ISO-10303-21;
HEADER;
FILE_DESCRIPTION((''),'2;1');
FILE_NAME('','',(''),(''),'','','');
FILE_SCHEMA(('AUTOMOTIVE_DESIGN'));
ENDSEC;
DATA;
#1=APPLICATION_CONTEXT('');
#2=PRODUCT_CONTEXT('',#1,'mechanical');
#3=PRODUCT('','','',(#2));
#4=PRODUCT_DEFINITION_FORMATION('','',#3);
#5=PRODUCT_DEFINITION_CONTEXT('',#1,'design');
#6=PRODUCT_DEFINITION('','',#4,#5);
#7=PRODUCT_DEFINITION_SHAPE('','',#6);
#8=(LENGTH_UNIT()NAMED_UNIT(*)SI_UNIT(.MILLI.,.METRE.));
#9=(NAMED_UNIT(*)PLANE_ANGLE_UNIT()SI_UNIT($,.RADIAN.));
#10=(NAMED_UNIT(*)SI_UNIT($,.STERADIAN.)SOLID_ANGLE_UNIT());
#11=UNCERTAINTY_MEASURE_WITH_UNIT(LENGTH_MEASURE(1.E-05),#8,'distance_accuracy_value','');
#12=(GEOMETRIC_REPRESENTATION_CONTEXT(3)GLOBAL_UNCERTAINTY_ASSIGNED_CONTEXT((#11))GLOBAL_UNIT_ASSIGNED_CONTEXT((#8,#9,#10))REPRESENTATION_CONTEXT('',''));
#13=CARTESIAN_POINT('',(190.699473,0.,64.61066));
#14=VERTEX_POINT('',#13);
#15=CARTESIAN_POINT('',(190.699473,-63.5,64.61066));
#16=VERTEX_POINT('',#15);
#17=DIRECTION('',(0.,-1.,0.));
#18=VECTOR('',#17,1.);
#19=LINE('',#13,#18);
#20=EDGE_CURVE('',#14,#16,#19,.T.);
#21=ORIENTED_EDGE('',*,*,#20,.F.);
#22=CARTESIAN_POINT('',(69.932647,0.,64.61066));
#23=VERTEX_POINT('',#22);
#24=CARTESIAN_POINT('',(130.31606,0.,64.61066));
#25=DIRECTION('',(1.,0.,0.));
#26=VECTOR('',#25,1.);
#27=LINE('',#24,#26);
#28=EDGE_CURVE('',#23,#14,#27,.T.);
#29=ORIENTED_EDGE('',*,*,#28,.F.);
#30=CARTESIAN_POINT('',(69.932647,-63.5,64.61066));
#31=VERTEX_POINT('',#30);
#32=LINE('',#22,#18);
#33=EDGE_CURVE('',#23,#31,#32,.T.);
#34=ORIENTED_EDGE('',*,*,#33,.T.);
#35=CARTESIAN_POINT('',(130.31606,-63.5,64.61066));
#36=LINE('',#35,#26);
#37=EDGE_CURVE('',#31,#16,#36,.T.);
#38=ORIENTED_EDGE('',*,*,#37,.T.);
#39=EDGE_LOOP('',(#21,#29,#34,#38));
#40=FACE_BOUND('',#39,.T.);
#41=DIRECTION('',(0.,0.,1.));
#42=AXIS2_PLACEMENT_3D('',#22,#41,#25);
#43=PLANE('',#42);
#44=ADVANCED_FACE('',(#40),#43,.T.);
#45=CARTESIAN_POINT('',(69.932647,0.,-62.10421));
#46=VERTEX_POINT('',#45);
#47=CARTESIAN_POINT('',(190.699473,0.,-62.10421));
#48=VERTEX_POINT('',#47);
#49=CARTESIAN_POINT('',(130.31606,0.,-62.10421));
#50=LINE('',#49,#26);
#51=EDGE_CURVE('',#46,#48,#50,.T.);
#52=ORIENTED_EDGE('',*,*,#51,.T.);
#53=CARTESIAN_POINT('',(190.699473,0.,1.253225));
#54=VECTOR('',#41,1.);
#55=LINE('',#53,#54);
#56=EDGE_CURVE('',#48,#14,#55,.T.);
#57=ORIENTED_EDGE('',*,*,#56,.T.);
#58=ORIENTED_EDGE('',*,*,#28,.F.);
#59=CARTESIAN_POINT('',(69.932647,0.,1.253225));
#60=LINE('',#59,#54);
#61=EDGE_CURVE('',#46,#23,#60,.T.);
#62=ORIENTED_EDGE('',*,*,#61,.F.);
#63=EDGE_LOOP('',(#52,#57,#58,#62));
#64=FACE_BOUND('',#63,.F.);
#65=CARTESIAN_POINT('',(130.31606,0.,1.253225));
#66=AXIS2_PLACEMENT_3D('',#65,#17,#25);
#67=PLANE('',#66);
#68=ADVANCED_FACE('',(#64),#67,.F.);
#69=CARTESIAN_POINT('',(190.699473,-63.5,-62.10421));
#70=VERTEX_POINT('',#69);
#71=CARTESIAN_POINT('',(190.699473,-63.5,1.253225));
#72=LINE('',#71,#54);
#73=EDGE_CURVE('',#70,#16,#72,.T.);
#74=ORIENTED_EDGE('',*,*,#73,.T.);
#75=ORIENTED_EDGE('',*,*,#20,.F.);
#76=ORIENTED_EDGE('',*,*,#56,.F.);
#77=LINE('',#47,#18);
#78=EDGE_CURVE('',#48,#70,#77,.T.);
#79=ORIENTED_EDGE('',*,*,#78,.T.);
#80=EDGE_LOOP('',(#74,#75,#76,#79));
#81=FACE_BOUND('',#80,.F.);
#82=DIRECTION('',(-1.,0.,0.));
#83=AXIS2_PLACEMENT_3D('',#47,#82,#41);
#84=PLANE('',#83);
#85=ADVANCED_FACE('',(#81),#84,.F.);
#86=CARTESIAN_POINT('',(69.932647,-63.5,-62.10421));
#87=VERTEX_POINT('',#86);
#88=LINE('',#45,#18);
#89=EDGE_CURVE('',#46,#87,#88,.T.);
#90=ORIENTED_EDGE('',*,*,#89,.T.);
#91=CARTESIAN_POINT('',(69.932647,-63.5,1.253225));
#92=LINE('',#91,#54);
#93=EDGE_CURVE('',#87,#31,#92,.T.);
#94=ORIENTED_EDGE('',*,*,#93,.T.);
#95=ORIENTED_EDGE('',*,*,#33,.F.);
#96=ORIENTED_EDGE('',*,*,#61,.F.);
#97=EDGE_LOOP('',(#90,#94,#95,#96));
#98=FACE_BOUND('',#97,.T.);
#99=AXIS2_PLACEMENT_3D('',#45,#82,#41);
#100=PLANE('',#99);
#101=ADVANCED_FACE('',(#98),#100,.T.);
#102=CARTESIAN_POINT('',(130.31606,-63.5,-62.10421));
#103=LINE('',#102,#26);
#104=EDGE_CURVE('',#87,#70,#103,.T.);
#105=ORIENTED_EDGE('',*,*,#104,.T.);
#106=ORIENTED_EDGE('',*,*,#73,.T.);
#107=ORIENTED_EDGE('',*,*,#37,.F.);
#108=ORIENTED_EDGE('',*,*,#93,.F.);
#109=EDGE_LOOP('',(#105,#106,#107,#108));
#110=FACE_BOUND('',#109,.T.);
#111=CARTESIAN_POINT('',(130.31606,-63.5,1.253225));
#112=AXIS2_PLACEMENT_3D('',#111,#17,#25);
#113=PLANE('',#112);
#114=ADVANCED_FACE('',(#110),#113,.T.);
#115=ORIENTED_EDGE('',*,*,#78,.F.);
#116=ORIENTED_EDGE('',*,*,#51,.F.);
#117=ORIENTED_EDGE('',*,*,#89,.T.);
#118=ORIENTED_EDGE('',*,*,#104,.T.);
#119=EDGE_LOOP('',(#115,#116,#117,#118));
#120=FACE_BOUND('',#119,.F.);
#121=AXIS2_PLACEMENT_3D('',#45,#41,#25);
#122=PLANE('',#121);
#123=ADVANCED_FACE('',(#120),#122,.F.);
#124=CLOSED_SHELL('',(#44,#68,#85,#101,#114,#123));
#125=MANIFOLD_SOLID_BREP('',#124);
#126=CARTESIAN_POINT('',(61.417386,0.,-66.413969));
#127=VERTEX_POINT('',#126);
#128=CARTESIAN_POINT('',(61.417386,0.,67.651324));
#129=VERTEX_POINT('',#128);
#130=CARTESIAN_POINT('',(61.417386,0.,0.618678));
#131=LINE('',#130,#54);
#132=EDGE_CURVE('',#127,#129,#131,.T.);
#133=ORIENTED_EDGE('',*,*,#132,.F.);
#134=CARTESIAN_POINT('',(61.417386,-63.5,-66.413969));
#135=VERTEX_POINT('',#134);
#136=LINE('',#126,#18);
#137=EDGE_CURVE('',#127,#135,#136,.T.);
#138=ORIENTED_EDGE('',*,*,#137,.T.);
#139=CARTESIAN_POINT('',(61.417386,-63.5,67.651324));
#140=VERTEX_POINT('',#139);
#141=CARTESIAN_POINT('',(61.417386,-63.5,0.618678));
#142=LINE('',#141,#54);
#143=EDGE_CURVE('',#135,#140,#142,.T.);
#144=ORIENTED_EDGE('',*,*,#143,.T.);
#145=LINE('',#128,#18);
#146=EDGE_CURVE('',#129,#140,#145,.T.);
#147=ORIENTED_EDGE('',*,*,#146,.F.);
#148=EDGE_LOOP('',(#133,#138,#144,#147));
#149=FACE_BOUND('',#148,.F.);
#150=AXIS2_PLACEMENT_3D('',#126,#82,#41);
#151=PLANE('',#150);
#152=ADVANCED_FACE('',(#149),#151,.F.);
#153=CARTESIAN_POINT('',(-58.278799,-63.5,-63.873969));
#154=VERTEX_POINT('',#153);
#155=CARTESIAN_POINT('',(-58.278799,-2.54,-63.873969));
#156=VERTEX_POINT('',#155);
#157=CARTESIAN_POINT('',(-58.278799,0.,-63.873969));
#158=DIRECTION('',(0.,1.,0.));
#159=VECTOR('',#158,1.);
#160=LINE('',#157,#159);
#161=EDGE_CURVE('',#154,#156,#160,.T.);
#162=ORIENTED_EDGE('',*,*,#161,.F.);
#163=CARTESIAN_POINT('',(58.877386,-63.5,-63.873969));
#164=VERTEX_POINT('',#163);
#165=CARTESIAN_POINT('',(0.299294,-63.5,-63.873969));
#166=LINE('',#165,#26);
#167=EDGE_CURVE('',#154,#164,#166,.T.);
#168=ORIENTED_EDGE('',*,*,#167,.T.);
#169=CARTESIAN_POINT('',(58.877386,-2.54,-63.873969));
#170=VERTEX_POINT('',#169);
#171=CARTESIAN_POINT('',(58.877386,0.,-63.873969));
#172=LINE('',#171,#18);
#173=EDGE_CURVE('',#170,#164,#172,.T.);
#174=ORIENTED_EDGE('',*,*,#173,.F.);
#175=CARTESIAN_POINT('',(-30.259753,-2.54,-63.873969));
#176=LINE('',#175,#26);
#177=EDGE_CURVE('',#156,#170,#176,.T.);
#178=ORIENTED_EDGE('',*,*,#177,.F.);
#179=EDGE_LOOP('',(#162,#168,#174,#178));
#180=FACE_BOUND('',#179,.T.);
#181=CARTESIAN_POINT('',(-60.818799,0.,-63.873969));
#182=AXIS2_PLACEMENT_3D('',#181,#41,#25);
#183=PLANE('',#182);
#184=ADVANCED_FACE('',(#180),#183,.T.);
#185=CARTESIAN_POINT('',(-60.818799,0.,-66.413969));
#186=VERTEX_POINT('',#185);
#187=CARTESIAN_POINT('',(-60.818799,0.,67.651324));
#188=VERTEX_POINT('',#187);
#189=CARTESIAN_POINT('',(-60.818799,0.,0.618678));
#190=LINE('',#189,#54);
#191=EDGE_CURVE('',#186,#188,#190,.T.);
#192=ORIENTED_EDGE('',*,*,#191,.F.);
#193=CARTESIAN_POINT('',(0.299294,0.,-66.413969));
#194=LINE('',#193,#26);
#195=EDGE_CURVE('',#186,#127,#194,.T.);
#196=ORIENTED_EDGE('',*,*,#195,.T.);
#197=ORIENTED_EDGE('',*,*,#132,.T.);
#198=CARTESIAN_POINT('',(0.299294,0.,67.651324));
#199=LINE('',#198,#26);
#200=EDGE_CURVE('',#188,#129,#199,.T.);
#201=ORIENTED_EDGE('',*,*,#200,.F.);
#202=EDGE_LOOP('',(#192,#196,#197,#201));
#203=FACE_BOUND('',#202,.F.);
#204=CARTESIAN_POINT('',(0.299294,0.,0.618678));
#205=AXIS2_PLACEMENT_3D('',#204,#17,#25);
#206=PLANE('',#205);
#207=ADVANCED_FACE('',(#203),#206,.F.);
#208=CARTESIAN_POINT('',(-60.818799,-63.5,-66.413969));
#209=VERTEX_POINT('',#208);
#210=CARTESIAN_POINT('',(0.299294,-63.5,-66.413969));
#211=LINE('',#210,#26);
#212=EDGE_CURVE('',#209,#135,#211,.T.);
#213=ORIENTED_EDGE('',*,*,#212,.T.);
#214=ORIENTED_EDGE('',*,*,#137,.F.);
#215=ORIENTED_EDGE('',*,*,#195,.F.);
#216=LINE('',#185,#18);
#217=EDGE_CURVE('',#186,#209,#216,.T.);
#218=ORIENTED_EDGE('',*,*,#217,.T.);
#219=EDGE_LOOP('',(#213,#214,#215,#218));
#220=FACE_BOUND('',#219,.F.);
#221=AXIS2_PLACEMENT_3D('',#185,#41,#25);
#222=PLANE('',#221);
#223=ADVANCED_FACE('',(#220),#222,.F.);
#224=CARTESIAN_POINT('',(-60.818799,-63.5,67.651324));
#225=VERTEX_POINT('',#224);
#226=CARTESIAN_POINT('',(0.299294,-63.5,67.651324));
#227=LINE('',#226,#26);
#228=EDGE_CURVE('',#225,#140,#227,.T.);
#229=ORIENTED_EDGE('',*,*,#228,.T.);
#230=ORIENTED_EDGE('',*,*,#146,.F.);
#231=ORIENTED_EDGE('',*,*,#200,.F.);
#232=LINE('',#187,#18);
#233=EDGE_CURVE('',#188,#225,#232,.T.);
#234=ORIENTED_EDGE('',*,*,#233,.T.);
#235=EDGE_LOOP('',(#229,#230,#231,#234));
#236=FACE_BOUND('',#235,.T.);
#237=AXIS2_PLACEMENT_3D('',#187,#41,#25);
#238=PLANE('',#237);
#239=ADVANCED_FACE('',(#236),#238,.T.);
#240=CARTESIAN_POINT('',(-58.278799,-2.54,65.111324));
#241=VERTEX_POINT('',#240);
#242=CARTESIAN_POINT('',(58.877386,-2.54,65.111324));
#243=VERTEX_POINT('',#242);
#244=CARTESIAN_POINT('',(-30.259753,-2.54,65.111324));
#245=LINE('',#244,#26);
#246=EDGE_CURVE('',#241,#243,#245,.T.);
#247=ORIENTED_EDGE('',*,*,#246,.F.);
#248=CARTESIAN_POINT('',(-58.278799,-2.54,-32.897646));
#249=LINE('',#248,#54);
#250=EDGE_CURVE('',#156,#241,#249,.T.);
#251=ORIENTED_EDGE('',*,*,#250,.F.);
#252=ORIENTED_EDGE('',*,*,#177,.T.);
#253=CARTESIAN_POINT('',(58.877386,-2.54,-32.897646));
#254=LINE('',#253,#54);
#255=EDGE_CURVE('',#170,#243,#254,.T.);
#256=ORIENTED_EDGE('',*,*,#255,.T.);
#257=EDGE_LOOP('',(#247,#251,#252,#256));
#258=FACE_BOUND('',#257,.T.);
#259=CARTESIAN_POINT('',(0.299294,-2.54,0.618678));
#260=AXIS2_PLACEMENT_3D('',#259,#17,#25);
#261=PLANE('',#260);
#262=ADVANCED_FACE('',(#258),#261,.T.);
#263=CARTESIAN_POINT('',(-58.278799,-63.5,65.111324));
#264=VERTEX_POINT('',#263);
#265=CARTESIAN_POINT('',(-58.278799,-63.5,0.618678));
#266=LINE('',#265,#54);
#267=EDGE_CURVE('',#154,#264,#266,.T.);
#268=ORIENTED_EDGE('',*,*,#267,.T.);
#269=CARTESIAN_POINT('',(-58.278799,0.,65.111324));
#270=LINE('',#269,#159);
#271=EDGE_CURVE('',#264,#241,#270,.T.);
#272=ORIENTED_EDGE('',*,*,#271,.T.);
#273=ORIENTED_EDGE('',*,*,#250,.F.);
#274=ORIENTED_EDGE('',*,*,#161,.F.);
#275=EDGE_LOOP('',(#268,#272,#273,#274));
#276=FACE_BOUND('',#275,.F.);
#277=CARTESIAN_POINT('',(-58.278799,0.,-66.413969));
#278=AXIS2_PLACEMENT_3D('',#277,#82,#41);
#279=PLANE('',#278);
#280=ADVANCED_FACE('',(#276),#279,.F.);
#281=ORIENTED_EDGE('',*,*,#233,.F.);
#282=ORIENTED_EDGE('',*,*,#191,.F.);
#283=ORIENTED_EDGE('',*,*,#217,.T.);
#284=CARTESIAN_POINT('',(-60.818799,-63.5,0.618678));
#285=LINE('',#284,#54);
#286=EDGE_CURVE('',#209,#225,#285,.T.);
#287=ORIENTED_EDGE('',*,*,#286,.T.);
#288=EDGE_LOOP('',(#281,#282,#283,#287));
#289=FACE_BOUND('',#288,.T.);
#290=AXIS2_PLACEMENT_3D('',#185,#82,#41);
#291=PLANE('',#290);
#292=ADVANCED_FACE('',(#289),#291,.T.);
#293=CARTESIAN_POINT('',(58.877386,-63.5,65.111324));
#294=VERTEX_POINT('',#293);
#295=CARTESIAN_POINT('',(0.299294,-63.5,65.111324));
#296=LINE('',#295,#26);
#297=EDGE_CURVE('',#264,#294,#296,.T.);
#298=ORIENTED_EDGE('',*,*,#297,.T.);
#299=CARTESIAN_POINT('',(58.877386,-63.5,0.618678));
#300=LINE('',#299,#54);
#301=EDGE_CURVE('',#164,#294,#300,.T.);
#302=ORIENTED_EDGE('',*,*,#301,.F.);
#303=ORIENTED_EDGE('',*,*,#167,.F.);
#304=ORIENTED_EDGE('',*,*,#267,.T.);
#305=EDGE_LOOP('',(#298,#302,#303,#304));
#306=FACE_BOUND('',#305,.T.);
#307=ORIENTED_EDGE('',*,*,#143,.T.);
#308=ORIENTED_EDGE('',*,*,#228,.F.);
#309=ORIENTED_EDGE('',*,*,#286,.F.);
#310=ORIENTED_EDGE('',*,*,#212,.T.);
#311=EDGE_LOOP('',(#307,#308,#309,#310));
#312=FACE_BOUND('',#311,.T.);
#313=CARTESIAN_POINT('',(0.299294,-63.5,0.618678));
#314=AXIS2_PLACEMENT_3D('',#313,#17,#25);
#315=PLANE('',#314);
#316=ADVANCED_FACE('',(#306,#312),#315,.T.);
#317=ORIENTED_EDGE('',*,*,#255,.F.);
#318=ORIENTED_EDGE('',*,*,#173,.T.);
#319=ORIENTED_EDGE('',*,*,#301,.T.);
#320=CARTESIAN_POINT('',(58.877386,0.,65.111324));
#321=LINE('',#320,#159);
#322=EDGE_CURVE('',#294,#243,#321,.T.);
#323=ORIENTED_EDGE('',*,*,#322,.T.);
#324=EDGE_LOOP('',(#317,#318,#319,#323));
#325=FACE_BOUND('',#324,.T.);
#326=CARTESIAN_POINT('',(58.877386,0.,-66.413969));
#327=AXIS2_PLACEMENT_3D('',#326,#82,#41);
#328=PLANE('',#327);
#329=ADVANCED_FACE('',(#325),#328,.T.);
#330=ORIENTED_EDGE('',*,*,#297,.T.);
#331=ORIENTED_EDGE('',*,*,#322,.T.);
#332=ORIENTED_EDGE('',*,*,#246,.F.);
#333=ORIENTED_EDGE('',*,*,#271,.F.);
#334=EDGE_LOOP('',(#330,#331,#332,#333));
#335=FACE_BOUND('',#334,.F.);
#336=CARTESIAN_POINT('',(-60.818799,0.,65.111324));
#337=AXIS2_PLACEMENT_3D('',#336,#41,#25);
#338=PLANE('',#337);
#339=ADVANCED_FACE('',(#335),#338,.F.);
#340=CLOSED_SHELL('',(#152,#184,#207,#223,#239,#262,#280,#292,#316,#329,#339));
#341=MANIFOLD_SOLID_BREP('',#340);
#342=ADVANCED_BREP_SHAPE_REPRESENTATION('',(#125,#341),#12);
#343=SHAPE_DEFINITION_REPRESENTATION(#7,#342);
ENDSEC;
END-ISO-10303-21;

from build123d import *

# Parameters (mm, degrees)
F0_W     = 122.2361847758
F0_H     = 134.0652927756
F5_DEPTH = 63.5
F6_T     = -2.54
F1_W     = 120.766825974
F1_H     = 126.7148703337
F2_DEPTH = 63.5


# Not quite as in the source:
# - the program builds the solid bodies; features that only make, move or delete a surface that nothing else refers to are left out


with BuildPart() as f5:
    # F0 (on Front) → F5 (new body)
    with BuildSketch(Plane.XZ):
        with Locations((0.2992935479, 0.6186775863)):
            Rectangle(F0_W, F0_H)
    extrude(amount=F5_DEPTH)

    # F6
    f6_openings = [f5.faces().sort_by_distance(p)[0] for p in [
        (0.299294, -63.5, 0.618678),
    ]]
    offset(amount=F6_T, openings=f6_openings)


with BuildPart() as f2:
    # F1 (on Front) → F2 (new body)
    with BuildSketch(Plane.XZ):
        with Locations((130.3160600364, 1.2532249093)):
            Rectangle(F1_W, F1_H)
    extrude(amount=F2_DEPTH)


solid = Compound([f5.part, f2.part])
